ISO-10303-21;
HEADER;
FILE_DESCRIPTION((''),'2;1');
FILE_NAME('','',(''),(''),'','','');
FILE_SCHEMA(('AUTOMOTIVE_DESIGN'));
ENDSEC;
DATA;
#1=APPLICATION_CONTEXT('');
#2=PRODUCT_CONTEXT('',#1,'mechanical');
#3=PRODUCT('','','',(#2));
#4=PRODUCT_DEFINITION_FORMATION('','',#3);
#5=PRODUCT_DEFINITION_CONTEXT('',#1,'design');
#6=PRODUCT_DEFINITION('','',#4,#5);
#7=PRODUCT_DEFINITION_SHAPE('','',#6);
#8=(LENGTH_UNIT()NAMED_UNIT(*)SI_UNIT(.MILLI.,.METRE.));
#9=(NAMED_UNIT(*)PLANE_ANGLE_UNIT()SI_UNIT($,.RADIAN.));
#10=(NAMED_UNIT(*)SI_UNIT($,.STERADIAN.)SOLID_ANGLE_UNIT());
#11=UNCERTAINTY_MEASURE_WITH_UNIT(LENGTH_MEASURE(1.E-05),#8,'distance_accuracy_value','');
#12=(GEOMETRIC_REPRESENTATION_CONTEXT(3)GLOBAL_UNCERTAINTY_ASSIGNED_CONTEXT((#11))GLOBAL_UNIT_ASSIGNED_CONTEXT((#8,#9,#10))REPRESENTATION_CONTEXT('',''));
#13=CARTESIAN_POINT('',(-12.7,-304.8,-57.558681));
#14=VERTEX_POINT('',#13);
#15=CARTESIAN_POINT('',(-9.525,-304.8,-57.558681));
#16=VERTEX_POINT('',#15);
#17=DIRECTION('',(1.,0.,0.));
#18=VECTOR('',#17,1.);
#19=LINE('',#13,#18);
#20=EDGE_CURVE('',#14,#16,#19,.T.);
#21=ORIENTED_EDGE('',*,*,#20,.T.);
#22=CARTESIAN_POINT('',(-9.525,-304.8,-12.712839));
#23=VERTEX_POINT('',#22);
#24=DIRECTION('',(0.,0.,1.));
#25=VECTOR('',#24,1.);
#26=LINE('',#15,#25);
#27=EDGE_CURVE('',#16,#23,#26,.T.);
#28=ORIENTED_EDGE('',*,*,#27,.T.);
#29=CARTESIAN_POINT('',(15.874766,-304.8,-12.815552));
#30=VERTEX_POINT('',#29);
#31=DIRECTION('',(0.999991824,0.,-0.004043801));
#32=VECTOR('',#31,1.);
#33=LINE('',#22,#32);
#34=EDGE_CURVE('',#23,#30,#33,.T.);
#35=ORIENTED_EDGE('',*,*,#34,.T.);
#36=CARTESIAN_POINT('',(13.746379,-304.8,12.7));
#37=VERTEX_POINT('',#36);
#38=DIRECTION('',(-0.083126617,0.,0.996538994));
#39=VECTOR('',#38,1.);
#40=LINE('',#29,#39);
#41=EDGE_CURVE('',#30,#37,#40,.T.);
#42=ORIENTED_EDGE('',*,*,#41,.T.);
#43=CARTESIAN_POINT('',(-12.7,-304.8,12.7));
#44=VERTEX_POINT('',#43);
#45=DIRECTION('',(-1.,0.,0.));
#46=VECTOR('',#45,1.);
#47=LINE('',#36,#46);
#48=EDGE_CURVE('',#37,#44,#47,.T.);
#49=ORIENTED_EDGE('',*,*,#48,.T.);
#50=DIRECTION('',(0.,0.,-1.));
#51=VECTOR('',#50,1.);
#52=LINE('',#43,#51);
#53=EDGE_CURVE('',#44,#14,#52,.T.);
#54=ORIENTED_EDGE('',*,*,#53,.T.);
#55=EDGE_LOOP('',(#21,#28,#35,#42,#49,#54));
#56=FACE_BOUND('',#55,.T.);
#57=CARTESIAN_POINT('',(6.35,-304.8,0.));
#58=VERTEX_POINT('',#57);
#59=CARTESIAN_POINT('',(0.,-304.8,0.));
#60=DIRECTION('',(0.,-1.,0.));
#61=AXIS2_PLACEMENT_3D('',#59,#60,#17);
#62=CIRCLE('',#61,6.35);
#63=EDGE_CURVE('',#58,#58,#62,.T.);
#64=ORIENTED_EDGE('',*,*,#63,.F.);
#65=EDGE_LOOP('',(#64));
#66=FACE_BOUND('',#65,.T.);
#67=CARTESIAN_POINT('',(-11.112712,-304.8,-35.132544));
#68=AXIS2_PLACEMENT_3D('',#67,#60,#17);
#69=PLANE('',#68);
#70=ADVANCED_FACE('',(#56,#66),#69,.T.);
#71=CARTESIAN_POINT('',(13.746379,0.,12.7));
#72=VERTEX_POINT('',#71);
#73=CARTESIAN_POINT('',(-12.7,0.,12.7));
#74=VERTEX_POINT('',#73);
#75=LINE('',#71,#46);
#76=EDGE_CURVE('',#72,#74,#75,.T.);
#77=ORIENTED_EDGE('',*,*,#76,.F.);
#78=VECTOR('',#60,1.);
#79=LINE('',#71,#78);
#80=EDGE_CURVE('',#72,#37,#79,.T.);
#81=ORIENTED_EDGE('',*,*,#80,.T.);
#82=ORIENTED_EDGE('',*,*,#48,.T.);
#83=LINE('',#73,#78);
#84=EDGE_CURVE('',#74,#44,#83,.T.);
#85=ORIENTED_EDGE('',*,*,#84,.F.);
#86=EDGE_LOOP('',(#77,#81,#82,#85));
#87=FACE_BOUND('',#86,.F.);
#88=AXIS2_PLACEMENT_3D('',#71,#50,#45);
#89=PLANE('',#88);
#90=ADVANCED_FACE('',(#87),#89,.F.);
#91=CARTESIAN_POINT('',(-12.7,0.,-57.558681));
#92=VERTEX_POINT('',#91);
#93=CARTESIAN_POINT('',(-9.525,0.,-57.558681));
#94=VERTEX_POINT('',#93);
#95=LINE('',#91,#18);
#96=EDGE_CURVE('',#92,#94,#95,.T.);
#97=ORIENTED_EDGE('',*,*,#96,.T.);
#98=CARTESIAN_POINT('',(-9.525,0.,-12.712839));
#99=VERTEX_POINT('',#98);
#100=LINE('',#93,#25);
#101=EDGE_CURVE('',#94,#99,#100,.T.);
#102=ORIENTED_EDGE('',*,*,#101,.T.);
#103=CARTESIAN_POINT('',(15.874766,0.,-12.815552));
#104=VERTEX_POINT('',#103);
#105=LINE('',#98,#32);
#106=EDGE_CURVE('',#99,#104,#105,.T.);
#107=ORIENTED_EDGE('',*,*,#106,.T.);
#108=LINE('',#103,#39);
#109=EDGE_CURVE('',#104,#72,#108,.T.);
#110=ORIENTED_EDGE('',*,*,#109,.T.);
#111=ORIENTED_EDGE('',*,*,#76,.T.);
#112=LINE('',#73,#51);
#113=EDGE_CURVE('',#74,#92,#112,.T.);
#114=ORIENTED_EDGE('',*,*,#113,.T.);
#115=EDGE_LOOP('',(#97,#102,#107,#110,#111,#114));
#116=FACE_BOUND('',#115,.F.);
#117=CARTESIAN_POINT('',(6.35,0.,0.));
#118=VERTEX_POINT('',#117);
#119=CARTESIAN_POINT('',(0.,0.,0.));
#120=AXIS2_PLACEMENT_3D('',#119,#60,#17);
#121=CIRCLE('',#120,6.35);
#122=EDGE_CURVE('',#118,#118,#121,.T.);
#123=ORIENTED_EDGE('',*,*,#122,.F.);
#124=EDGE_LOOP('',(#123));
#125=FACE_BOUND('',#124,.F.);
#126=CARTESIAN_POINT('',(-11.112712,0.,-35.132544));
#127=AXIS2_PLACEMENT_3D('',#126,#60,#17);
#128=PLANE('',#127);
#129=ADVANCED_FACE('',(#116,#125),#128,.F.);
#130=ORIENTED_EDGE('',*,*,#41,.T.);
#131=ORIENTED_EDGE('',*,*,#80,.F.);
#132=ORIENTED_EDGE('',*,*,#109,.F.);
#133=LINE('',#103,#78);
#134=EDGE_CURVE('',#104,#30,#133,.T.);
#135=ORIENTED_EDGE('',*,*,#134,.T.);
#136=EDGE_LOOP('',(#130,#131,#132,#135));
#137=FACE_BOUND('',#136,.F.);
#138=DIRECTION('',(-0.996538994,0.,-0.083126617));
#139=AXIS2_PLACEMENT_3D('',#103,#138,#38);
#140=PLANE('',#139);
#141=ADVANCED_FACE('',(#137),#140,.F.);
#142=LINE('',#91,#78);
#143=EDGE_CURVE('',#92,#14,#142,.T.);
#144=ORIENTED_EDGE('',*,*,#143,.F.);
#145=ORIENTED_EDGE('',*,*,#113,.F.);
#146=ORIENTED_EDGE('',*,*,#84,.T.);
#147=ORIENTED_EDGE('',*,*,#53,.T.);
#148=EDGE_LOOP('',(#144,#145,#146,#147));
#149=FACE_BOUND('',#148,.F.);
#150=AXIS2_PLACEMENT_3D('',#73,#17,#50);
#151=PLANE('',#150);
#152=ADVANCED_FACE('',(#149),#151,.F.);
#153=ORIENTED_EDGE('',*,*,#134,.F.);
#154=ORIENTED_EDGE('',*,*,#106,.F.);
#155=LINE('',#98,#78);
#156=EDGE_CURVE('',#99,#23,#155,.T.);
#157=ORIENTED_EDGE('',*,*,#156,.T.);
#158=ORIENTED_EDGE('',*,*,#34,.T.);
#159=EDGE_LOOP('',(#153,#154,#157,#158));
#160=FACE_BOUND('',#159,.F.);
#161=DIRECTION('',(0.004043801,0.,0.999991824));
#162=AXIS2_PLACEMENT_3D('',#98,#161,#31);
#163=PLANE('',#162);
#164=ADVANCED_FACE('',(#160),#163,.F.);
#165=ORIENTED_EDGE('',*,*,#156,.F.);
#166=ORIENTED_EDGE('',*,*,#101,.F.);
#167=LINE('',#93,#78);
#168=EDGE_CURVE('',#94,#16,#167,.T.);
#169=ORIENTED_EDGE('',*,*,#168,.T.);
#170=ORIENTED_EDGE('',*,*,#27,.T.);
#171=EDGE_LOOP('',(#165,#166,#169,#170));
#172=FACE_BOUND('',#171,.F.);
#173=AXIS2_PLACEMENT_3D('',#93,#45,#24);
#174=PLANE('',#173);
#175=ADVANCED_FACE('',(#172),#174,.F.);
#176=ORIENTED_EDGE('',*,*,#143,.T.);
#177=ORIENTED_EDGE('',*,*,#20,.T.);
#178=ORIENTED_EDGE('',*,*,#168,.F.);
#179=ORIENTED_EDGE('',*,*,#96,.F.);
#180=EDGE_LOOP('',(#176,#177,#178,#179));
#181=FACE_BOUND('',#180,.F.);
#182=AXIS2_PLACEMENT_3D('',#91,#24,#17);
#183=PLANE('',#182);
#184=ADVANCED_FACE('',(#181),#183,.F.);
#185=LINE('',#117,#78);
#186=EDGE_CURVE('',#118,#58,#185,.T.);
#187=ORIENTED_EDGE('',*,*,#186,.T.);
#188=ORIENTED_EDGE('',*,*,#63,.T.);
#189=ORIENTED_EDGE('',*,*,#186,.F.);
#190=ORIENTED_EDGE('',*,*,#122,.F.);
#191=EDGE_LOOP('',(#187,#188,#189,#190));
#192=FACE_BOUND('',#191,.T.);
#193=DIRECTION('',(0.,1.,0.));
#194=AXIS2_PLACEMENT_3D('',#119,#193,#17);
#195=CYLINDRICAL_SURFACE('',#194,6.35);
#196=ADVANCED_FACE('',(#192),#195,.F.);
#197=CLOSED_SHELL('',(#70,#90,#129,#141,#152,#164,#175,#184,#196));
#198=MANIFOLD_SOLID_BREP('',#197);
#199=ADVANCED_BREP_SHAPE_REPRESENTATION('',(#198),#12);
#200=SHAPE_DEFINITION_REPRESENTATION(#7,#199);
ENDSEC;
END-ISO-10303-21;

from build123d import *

# Parameters (mm, degrees)
F0_R     = 6.35
F1_DEPTH = 304.8


# Not quite as in the source:
# - a feature names something its author has since deleted; it is built from what else it names


with BuildPart() as f1:
    # F0 (on Front) → F1 (new body)
    with BuildSketch(Plane.XZ):
        Polygon((-9.525, -12.7128391741), (-12.7, -12.7), (-12.7, -57.5586806671), (-9.525, -57.5586806671), align=None)
        Polygon((15.8747663651, -12.8155516218), (13.7463785204, 12.7), (-12.7, 12.7), (-12.7, -12.7), (-9.525, -12.7), (-9.525, -12.7128391741), align=None)
        Circle(F0_R, mode=Mode.SUBTRACT)
        Polygon((-9.525, -12.7), (-12.7, -12.7), (-9.525, -12.7128391741), align=None)
    extrude(amount=F1_DEPTH)


solid = f1.part
